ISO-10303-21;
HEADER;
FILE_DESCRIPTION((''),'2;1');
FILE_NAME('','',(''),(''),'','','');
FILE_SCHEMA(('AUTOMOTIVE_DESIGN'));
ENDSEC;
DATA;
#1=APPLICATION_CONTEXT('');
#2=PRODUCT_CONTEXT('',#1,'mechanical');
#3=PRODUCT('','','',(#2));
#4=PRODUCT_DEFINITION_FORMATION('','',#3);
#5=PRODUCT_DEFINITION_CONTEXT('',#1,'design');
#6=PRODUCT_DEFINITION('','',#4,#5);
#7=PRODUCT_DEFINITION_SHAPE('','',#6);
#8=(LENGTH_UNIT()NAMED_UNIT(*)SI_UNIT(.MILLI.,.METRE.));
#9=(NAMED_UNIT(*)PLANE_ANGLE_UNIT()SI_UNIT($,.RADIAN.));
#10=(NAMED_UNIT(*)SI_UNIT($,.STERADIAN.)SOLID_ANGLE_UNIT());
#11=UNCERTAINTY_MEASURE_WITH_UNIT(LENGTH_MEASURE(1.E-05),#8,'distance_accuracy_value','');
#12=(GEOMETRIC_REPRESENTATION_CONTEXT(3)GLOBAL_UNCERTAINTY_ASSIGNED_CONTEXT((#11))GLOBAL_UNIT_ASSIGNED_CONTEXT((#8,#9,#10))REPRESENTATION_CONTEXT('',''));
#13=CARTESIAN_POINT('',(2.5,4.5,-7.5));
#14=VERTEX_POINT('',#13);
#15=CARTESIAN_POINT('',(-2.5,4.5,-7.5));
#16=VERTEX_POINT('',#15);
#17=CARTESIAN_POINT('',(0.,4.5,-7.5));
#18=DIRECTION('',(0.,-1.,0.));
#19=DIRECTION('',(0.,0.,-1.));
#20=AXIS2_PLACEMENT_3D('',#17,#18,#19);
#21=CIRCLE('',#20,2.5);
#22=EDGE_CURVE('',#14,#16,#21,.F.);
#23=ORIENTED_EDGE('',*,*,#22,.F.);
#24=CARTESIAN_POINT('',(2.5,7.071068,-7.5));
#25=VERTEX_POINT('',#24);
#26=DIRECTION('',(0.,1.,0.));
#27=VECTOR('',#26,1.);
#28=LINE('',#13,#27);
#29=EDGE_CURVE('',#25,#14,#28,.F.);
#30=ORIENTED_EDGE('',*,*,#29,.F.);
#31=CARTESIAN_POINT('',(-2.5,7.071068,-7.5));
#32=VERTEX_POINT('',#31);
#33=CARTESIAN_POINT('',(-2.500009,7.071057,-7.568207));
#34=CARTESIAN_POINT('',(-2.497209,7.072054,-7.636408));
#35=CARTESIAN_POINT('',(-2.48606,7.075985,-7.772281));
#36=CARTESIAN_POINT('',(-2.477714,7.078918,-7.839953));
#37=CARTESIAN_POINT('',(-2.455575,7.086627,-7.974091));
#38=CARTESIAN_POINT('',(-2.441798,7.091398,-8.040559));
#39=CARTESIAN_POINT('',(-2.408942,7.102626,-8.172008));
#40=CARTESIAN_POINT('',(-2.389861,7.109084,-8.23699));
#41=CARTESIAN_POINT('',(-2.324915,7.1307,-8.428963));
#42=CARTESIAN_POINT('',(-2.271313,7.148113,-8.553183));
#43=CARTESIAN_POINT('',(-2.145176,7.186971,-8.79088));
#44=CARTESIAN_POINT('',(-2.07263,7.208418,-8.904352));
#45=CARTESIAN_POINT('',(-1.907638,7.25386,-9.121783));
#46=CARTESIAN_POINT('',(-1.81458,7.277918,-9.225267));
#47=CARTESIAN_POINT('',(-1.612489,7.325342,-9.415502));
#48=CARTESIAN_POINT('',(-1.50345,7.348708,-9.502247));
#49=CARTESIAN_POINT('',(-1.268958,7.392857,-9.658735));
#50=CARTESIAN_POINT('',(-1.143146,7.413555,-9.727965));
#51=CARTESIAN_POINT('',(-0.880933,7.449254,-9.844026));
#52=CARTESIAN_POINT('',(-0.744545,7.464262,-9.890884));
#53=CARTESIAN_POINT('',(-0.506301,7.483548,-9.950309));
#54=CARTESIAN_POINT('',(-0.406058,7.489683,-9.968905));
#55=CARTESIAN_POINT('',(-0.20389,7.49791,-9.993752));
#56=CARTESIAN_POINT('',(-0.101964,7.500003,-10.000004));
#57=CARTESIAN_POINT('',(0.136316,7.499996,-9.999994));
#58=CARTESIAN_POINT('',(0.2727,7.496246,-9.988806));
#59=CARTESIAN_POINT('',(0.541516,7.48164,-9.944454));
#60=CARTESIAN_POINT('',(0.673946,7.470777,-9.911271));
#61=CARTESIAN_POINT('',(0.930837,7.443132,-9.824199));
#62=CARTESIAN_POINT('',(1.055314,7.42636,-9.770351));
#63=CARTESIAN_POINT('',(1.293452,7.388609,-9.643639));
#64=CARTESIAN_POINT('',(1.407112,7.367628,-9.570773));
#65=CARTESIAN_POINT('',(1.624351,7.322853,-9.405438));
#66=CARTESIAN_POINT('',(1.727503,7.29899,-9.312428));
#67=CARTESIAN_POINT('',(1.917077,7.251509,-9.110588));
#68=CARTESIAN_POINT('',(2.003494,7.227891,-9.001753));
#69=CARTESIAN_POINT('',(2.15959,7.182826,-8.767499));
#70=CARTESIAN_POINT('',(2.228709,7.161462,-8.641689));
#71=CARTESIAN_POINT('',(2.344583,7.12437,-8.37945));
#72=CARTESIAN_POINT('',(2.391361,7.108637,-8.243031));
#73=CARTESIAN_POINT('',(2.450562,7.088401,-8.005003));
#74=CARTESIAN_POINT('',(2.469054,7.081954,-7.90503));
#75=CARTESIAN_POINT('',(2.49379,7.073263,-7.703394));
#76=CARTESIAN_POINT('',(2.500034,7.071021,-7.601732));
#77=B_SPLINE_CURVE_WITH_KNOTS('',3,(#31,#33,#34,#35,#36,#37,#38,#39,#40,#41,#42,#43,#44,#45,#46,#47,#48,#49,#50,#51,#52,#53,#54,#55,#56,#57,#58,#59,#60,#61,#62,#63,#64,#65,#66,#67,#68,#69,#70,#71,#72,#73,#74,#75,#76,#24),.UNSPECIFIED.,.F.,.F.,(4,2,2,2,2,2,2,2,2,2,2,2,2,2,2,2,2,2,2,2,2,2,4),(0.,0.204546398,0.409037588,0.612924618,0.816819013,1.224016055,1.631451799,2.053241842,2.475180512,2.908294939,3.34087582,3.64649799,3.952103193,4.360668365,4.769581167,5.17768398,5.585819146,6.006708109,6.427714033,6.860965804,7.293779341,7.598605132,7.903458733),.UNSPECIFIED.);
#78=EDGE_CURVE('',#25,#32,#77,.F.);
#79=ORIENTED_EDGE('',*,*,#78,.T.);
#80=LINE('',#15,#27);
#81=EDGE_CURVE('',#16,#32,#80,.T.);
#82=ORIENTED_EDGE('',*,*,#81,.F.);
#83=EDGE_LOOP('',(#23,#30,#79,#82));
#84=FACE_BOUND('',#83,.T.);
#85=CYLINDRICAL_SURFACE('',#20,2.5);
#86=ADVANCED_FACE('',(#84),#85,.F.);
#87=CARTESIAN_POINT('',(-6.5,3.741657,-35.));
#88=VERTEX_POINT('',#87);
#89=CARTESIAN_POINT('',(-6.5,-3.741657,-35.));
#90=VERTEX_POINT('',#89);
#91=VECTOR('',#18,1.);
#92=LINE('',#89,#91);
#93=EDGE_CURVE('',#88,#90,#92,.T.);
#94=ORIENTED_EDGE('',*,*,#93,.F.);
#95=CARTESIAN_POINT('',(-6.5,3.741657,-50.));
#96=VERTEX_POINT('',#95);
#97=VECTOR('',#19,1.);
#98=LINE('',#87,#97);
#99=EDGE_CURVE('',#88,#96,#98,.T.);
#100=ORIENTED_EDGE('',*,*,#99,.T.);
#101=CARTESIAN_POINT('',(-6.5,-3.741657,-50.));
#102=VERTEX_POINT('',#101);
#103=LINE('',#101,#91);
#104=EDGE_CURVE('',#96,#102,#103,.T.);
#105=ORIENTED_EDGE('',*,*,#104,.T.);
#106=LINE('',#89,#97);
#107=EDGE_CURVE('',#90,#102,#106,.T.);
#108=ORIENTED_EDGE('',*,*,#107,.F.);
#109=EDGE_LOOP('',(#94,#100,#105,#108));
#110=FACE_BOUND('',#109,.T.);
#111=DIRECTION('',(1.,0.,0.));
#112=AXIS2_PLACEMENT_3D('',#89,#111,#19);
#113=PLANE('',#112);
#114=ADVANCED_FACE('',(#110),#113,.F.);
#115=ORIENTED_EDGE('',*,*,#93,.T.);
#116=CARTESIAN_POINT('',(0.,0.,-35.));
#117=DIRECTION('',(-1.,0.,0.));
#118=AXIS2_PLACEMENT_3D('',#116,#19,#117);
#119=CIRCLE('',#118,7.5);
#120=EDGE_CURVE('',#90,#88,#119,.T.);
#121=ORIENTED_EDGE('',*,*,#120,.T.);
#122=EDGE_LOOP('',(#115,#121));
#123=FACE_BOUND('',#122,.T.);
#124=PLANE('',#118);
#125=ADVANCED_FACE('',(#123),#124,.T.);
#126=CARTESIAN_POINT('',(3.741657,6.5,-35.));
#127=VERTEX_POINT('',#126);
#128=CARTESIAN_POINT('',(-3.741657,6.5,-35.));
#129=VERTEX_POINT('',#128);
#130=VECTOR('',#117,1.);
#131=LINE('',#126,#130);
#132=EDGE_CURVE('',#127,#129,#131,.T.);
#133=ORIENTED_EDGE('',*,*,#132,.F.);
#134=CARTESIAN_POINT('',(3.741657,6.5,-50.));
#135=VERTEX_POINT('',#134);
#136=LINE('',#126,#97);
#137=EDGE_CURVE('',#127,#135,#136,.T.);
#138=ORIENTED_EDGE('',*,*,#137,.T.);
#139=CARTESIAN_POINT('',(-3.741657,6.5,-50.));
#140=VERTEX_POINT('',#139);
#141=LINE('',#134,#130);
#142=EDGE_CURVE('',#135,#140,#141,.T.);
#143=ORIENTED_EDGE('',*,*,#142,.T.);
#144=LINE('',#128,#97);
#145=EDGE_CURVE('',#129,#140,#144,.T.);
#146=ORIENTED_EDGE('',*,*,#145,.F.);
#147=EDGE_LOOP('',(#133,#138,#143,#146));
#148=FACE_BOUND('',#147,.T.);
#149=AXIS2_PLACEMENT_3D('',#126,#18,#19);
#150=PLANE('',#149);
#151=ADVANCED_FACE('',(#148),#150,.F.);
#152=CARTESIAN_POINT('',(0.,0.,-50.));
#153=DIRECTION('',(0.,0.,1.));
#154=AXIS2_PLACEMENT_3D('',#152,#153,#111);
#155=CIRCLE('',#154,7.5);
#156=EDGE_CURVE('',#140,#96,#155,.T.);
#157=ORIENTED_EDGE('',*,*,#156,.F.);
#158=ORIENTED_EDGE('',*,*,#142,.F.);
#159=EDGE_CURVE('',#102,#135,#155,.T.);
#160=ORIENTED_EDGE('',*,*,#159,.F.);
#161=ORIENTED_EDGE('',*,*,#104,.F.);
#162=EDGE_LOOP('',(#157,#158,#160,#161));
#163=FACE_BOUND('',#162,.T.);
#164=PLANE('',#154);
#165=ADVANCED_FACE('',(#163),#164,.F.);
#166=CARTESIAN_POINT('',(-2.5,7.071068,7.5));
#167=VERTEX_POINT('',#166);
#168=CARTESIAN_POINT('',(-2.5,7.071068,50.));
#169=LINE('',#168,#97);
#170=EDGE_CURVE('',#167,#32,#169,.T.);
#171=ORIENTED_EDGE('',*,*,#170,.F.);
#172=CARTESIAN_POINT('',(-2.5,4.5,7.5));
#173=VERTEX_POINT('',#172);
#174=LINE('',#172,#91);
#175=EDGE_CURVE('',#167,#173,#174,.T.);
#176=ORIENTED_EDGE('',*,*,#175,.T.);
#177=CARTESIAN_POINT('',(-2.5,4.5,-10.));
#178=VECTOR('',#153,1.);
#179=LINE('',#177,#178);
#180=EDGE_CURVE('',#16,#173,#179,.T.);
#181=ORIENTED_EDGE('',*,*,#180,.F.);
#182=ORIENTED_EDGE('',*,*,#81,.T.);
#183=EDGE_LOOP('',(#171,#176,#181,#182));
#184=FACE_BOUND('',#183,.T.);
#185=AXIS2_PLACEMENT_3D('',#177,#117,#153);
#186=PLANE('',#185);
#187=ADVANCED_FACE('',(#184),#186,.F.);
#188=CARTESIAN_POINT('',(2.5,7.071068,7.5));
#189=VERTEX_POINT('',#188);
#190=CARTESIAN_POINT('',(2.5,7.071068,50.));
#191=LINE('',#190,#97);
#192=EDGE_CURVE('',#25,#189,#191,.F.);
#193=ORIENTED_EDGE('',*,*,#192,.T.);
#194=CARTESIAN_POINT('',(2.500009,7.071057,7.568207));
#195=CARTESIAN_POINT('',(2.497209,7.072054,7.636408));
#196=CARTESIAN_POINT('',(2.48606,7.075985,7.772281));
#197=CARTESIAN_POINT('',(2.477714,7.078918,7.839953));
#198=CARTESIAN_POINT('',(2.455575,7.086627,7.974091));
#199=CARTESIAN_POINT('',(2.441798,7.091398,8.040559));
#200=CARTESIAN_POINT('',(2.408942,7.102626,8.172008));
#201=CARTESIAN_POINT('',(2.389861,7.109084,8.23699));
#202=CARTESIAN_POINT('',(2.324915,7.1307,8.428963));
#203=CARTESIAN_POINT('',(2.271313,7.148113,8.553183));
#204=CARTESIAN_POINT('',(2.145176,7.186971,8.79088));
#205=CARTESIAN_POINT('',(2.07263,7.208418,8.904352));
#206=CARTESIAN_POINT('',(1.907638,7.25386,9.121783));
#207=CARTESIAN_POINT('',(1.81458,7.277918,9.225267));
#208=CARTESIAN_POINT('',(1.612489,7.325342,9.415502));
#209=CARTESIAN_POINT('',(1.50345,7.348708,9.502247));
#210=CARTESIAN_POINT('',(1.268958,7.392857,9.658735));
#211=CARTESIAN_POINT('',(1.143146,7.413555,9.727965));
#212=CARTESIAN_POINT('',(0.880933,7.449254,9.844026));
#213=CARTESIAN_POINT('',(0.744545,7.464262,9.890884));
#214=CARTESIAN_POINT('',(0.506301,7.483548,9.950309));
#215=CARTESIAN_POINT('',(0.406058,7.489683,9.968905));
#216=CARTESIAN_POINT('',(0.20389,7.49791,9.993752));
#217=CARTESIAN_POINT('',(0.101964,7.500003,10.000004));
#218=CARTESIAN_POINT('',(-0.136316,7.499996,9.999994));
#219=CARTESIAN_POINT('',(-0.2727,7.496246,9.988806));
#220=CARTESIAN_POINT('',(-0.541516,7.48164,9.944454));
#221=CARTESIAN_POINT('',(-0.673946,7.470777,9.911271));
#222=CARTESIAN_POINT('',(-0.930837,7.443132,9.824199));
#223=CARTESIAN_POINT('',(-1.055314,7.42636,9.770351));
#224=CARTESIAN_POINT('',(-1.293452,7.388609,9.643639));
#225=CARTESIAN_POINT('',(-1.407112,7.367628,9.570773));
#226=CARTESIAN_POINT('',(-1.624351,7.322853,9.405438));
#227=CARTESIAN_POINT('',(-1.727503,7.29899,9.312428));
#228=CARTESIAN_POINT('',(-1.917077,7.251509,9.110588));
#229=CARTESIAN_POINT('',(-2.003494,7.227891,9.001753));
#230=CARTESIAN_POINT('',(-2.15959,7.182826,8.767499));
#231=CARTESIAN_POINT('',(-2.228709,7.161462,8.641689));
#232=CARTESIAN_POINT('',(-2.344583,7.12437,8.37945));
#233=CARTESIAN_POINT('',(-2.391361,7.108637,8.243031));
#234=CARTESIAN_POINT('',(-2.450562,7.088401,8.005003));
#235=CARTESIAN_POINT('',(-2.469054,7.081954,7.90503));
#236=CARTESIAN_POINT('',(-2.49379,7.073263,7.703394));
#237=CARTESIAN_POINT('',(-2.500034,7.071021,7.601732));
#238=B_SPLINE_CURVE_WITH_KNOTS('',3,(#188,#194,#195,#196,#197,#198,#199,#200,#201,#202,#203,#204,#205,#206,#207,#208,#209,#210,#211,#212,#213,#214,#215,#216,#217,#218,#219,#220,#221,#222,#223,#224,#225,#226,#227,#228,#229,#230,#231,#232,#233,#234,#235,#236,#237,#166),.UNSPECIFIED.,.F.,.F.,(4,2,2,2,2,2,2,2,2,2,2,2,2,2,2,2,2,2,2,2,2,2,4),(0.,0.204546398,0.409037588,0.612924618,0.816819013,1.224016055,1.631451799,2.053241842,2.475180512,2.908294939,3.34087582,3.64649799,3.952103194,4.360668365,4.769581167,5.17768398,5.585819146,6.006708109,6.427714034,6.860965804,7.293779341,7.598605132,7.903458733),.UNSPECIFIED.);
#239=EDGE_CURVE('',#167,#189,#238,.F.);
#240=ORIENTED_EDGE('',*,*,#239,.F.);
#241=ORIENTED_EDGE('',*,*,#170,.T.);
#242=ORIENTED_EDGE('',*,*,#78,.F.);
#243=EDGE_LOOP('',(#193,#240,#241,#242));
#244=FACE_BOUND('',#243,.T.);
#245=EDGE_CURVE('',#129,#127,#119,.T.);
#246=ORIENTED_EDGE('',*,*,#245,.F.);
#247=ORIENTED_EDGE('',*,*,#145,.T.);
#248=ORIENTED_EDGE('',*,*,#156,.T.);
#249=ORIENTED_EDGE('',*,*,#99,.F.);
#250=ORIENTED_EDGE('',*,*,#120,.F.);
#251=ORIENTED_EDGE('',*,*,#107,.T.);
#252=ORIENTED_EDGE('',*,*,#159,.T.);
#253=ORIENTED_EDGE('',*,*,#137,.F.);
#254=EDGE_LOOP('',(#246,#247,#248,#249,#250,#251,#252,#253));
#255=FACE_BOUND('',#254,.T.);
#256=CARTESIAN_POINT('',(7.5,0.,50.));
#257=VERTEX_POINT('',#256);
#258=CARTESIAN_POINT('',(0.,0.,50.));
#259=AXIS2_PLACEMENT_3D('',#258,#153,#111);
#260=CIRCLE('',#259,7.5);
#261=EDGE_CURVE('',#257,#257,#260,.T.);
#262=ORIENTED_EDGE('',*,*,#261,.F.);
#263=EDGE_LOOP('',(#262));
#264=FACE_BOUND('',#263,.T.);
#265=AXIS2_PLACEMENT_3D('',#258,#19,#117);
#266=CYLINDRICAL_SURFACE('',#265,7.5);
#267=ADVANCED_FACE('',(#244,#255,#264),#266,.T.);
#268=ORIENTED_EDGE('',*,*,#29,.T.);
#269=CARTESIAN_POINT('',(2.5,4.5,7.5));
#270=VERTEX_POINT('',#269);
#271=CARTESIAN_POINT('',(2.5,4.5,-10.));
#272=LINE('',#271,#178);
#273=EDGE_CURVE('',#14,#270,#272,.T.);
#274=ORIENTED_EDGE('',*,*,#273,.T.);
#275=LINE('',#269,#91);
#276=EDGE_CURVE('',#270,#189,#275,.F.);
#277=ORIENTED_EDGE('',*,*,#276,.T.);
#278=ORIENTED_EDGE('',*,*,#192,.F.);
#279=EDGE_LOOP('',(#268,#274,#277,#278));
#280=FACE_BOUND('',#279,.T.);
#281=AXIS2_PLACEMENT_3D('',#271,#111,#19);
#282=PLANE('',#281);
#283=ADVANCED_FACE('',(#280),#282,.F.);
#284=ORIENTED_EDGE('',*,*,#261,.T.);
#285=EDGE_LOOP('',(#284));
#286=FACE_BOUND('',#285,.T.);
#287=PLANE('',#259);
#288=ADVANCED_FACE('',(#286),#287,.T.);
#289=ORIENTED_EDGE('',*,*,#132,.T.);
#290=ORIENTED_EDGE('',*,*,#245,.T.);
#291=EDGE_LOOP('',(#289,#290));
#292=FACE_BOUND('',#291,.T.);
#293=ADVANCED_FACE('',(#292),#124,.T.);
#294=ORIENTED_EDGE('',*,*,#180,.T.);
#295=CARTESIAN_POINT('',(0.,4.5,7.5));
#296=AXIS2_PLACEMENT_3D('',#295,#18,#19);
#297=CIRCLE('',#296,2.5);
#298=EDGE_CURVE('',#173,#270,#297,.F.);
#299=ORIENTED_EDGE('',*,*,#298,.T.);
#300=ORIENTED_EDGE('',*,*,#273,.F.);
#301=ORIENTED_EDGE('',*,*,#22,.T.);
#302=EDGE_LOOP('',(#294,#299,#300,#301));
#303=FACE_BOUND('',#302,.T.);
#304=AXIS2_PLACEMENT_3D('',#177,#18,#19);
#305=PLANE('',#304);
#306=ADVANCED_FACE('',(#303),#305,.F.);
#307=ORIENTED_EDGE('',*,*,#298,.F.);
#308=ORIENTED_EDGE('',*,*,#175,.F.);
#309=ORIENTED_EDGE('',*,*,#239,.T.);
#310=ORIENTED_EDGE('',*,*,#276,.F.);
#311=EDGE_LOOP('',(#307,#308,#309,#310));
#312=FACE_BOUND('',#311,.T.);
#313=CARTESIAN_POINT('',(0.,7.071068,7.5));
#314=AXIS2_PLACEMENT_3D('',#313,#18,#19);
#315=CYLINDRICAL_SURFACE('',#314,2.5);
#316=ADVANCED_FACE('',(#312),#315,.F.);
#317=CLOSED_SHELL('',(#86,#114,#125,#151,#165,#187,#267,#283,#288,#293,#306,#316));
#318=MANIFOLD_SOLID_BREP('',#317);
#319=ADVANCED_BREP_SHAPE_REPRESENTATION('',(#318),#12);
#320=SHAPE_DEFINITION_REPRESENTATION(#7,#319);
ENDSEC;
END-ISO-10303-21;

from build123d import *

# Parameters (mm, degrees)
SKETCH1_R           = 7.5
BOSS_EXTRUDE1_DEPTH = 50
SKETCH2_W           = 5
SKETCH2_H           = 5
CUT_EXTRUDE1_DEPTH  = 10
FILLET1_R           = 2.5
FILLET2_R           = 2.5
CUT_EXTRUDE2_START  = -15
CUT_EXTRUDE2_DEPTH  = 15


with BuildPart() as part:
    # Sketch1 → Boss-Extrude1 (new, symmetric)
    with BuildSketch(Plane.XY):
        Circle(SKETCH1_R)
    extrude(amount=BOSS_EXTRUDE1_DEPTH, both=True)

    # Sketch2 → Cut-Extrude1 (cut, symmetric)
    with BuildSketch(Plane.XY):
        with Locations((0, 7)):
            Rectangle(SKETCH2_W, SKETCH2_H)
    extrude(amount=CUT_EXTRUDE1_DEPTH, both=True, mode=Mode.SUBTRACT)

    # Fillet1
    fillet1_edges = [part.edges().sort_by_distance(p)[0] for p in [
        (-2.5, 5.785533906, -10),
        (2.5, 5.785533906, -10),
    ]]
    fillet(fillet1_edges, radius=FILLET1_R - 0.0001)  # a hair under: the kernel refuses the full size

    # Fillet2
    fillet2_edges = [part.edges().sort_by_distance(p)[0] for p in [
        (-2.5, 5.785533906, 10),
        (2.5, 5.785533906, 10),
    ]]
    fillet(fillet2_edges, radius=FILLET2_R - 0.0001)  # a hair under: the kernel refuses the full size

    # Sketch3 → Cut-Extrude2 (cut)
    with BuildSketch(Plane(origin=(0, 0, -50), x_dir=(-1, 0, 0), z_dir=(0, 0, -1)).offset(CUT_EXTRUDE2_START)):
        with BuildLine():
            Line((-3.741657387, 6.5), (3.741657387, 6.5))
            ThreePointArc((3.741657387, 6.5), (0, 7.5), (-3.741657387, 6.5))
        make_face()
        with BuildLine():
            Line((6.5, -3.741657387), (6.5, 3.741657387))
            ThreePointArc((6.5, 3.741657387), (7.5, 0), (6.5, -3.741657387))
        make_face()
    extrude(amount=CUT_EXTRUDE2_DEPTH, mode=Mode.SUBTRACT)


solid = part.part
